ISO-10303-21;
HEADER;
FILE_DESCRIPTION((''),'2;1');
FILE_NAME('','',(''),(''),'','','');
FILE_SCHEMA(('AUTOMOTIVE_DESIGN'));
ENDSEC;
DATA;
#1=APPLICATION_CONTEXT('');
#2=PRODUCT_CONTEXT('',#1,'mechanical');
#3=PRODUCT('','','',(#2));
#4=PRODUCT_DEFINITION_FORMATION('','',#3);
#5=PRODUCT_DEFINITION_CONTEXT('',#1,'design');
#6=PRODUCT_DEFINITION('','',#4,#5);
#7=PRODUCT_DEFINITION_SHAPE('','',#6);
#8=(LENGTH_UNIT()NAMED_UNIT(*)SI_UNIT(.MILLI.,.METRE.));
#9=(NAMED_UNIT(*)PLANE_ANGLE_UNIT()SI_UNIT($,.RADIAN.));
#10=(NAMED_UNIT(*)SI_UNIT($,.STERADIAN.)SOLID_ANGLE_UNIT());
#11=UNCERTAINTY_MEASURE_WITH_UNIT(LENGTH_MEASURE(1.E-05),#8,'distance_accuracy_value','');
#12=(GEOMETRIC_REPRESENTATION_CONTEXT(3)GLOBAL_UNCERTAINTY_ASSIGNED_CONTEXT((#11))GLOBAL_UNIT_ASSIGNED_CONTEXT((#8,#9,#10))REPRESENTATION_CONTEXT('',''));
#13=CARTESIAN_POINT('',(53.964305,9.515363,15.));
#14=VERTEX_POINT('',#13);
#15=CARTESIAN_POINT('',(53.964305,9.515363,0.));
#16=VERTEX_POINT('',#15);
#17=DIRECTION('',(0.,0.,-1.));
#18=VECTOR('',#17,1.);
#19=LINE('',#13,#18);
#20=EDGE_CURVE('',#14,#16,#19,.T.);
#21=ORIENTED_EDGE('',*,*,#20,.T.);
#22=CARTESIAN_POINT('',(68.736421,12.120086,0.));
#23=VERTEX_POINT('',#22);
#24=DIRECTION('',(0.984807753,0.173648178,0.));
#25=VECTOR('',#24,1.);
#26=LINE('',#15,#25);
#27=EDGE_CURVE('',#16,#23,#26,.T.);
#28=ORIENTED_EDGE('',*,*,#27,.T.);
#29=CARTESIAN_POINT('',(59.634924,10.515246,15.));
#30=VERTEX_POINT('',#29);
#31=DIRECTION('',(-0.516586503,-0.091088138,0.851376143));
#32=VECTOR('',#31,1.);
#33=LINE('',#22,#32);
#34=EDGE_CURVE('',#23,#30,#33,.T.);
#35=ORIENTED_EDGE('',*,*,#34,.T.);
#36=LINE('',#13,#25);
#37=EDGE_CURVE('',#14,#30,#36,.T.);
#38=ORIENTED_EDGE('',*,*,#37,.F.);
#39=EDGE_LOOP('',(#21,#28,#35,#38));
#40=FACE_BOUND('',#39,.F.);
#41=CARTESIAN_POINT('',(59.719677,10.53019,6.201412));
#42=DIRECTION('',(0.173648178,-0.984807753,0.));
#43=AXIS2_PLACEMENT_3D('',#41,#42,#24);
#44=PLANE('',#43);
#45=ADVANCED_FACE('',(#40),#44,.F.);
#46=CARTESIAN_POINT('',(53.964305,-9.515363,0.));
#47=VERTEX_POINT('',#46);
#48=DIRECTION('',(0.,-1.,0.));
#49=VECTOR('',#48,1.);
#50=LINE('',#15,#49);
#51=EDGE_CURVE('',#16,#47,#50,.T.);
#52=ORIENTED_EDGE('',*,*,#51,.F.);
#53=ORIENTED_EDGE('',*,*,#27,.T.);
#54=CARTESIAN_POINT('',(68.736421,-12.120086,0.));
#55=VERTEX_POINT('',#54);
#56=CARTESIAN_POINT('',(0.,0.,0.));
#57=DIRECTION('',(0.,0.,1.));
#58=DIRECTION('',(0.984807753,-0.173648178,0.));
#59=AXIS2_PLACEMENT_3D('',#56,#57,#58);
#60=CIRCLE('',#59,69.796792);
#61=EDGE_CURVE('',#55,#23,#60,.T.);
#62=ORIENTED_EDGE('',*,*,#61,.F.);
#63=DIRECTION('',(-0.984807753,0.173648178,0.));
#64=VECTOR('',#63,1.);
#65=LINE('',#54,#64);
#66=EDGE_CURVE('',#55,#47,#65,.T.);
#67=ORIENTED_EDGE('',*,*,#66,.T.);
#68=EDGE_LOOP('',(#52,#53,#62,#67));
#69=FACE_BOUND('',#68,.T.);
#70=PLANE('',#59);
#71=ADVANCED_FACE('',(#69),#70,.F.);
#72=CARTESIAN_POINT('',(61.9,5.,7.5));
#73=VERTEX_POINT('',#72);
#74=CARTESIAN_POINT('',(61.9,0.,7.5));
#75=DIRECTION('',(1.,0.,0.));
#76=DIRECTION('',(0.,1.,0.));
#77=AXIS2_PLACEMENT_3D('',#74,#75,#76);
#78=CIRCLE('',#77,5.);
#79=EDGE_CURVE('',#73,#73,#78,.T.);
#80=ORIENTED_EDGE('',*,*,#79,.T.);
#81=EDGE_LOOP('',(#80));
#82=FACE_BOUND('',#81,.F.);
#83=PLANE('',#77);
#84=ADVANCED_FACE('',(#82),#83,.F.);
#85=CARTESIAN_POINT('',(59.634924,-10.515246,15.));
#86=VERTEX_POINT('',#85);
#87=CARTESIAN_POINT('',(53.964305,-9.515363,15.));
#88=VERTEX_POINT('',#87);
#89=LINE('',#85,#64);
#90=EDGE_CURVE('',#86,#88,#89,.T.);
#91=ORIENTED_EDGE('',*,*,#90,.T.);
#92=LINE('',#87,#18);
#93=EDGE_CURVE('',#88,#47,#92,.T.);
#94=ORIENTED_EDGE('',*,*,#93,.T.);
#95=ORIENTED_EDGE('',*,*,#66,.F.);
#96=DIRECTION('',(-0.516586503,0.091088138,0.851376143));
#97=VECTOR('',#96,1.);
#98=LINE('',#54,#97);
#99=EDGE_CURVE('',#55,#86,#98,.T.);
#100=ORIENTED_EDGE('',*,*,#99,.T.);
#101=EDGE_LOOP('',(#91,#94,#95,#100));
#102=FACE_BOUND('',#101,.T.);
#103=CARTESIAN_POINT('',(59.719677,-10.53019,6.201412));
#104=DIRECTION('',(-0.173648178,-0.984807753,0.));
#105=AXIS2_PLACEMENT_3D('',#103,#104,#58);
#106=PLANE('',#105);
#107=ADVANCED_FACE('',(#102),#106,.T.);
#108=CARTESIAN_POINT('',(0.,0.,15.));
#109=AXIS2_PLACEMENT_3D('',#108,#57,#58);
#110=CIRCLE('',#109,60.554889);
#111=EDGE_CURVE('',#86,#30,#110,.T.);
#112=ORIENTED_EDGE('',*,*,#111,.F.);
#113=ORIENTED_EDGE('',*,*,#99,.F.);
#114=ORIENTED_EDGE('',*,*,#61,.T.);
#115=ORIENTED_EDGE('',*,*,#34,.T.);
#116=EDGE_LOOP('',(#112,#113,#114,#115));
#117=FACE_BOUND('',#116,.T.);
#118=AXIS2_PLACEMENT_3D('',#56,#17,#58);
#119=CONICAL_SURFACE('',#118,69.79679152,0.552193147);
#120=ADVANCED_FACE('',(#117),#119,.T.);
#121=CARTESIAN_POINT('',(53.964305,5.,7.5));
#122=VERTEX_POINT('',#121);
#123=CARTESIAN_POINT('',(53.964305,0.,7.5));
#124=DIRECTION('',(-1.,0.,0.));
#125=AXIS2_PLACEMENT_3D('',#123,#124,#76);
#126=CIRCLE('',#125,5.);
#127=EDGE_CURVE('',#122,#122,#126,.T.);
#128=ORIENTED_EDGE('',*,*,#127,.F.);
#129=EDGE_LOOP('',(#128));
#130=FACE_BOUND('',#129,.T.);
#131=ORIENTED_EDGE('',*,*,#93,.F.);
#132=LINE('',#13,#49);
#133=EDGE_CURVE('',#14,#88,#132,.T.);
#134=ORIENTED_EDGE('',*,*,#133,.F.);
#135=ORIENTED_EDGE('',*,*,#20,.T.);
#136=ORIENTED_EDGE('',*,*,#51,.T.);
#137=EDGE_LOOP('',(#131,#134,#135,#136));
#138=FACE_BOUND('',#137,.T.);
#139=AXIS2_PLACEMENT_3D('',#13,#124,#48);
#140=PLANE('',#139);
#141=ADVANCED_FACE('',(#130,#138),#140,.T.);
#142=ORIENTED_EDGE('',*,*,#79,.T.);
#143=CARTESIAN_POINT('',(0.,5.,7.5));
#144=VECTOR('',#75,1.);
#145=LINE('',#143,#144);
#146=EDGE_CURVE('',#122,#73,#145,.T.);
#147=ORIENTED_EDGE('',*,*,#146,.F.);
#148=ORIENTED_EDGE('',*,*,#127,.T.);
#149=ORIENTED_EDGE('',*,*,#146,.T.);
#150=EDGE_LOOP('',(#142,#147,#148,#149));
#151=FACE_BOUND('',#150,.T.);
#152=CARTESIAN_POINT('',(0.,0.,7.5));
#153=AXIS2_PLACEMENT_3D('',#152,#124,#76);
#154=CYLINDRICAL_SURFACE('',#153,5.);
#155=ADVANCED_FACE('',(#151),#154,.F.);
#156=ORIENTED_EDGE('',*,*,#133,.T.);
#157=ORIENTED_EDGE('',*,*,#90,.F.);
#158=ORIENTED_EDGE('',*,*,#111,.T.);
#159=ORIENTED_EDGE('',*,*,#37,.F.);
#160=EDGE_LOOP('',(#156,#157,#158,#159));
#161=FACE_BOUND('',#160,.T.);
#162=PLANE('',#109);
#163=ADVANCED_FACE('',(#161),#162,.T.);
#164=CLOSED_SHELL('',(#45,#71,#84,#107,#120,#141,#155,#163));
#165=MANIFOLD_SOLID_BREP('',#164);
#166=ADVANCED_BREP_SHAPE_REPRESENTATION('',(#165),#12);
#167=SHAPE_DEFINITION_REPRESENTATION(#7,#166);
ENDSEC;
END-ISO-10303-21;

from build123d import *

# Parameters (mm, degrees)
F5_ANGLE_BACK = 10
F5_ANGLE      = 20
F3_DEPTH      = 15
F1_R          = 5
F4_DEPTH      = 61.9


with BuildPart() as f5:
    # F0 (on Front) → F5 (revolve)
    with BuildSketch(Plane.XZ, mode=Mode.PRIVATE) as f5_sk:
        Polygon((69.7967915205, 0), (60.5548890955, 15), (54.7967915205, 15), (54.7967915205, 0), align=None)
    revolve(f5_sk.sketch.rotate(Axis((0, 0, 12.625), (0, 0, 1)), -F5_ANGLE_BACK), axis=Axis((0, 0, 12.625), (0, 0, 1)), revolution_arc=F5_ANGLE)

    # F2 (on face) → F3 (join)
    with BuildSketch(Plane.XY.offset(15)):
        Polygon((54.7967915205, 9.6621528013), (53.9643051295, 9.5153629895), (53.9643051295, -9.5153629895), (54.7967915205, -9.6621528013), (56.5004897511, 0), align=None)
    extrude(amount=-F3_DEPTH)

    # F1 (on Right) → F4 (cut)
    with BuildSketch(Plane.YZ):
        with Locations((0, 7.5)):
            Circle(F1_R)
    extrude(amount=F4_DEPTH, mode=Mode.SUBTRACT)


solid = f5.part
